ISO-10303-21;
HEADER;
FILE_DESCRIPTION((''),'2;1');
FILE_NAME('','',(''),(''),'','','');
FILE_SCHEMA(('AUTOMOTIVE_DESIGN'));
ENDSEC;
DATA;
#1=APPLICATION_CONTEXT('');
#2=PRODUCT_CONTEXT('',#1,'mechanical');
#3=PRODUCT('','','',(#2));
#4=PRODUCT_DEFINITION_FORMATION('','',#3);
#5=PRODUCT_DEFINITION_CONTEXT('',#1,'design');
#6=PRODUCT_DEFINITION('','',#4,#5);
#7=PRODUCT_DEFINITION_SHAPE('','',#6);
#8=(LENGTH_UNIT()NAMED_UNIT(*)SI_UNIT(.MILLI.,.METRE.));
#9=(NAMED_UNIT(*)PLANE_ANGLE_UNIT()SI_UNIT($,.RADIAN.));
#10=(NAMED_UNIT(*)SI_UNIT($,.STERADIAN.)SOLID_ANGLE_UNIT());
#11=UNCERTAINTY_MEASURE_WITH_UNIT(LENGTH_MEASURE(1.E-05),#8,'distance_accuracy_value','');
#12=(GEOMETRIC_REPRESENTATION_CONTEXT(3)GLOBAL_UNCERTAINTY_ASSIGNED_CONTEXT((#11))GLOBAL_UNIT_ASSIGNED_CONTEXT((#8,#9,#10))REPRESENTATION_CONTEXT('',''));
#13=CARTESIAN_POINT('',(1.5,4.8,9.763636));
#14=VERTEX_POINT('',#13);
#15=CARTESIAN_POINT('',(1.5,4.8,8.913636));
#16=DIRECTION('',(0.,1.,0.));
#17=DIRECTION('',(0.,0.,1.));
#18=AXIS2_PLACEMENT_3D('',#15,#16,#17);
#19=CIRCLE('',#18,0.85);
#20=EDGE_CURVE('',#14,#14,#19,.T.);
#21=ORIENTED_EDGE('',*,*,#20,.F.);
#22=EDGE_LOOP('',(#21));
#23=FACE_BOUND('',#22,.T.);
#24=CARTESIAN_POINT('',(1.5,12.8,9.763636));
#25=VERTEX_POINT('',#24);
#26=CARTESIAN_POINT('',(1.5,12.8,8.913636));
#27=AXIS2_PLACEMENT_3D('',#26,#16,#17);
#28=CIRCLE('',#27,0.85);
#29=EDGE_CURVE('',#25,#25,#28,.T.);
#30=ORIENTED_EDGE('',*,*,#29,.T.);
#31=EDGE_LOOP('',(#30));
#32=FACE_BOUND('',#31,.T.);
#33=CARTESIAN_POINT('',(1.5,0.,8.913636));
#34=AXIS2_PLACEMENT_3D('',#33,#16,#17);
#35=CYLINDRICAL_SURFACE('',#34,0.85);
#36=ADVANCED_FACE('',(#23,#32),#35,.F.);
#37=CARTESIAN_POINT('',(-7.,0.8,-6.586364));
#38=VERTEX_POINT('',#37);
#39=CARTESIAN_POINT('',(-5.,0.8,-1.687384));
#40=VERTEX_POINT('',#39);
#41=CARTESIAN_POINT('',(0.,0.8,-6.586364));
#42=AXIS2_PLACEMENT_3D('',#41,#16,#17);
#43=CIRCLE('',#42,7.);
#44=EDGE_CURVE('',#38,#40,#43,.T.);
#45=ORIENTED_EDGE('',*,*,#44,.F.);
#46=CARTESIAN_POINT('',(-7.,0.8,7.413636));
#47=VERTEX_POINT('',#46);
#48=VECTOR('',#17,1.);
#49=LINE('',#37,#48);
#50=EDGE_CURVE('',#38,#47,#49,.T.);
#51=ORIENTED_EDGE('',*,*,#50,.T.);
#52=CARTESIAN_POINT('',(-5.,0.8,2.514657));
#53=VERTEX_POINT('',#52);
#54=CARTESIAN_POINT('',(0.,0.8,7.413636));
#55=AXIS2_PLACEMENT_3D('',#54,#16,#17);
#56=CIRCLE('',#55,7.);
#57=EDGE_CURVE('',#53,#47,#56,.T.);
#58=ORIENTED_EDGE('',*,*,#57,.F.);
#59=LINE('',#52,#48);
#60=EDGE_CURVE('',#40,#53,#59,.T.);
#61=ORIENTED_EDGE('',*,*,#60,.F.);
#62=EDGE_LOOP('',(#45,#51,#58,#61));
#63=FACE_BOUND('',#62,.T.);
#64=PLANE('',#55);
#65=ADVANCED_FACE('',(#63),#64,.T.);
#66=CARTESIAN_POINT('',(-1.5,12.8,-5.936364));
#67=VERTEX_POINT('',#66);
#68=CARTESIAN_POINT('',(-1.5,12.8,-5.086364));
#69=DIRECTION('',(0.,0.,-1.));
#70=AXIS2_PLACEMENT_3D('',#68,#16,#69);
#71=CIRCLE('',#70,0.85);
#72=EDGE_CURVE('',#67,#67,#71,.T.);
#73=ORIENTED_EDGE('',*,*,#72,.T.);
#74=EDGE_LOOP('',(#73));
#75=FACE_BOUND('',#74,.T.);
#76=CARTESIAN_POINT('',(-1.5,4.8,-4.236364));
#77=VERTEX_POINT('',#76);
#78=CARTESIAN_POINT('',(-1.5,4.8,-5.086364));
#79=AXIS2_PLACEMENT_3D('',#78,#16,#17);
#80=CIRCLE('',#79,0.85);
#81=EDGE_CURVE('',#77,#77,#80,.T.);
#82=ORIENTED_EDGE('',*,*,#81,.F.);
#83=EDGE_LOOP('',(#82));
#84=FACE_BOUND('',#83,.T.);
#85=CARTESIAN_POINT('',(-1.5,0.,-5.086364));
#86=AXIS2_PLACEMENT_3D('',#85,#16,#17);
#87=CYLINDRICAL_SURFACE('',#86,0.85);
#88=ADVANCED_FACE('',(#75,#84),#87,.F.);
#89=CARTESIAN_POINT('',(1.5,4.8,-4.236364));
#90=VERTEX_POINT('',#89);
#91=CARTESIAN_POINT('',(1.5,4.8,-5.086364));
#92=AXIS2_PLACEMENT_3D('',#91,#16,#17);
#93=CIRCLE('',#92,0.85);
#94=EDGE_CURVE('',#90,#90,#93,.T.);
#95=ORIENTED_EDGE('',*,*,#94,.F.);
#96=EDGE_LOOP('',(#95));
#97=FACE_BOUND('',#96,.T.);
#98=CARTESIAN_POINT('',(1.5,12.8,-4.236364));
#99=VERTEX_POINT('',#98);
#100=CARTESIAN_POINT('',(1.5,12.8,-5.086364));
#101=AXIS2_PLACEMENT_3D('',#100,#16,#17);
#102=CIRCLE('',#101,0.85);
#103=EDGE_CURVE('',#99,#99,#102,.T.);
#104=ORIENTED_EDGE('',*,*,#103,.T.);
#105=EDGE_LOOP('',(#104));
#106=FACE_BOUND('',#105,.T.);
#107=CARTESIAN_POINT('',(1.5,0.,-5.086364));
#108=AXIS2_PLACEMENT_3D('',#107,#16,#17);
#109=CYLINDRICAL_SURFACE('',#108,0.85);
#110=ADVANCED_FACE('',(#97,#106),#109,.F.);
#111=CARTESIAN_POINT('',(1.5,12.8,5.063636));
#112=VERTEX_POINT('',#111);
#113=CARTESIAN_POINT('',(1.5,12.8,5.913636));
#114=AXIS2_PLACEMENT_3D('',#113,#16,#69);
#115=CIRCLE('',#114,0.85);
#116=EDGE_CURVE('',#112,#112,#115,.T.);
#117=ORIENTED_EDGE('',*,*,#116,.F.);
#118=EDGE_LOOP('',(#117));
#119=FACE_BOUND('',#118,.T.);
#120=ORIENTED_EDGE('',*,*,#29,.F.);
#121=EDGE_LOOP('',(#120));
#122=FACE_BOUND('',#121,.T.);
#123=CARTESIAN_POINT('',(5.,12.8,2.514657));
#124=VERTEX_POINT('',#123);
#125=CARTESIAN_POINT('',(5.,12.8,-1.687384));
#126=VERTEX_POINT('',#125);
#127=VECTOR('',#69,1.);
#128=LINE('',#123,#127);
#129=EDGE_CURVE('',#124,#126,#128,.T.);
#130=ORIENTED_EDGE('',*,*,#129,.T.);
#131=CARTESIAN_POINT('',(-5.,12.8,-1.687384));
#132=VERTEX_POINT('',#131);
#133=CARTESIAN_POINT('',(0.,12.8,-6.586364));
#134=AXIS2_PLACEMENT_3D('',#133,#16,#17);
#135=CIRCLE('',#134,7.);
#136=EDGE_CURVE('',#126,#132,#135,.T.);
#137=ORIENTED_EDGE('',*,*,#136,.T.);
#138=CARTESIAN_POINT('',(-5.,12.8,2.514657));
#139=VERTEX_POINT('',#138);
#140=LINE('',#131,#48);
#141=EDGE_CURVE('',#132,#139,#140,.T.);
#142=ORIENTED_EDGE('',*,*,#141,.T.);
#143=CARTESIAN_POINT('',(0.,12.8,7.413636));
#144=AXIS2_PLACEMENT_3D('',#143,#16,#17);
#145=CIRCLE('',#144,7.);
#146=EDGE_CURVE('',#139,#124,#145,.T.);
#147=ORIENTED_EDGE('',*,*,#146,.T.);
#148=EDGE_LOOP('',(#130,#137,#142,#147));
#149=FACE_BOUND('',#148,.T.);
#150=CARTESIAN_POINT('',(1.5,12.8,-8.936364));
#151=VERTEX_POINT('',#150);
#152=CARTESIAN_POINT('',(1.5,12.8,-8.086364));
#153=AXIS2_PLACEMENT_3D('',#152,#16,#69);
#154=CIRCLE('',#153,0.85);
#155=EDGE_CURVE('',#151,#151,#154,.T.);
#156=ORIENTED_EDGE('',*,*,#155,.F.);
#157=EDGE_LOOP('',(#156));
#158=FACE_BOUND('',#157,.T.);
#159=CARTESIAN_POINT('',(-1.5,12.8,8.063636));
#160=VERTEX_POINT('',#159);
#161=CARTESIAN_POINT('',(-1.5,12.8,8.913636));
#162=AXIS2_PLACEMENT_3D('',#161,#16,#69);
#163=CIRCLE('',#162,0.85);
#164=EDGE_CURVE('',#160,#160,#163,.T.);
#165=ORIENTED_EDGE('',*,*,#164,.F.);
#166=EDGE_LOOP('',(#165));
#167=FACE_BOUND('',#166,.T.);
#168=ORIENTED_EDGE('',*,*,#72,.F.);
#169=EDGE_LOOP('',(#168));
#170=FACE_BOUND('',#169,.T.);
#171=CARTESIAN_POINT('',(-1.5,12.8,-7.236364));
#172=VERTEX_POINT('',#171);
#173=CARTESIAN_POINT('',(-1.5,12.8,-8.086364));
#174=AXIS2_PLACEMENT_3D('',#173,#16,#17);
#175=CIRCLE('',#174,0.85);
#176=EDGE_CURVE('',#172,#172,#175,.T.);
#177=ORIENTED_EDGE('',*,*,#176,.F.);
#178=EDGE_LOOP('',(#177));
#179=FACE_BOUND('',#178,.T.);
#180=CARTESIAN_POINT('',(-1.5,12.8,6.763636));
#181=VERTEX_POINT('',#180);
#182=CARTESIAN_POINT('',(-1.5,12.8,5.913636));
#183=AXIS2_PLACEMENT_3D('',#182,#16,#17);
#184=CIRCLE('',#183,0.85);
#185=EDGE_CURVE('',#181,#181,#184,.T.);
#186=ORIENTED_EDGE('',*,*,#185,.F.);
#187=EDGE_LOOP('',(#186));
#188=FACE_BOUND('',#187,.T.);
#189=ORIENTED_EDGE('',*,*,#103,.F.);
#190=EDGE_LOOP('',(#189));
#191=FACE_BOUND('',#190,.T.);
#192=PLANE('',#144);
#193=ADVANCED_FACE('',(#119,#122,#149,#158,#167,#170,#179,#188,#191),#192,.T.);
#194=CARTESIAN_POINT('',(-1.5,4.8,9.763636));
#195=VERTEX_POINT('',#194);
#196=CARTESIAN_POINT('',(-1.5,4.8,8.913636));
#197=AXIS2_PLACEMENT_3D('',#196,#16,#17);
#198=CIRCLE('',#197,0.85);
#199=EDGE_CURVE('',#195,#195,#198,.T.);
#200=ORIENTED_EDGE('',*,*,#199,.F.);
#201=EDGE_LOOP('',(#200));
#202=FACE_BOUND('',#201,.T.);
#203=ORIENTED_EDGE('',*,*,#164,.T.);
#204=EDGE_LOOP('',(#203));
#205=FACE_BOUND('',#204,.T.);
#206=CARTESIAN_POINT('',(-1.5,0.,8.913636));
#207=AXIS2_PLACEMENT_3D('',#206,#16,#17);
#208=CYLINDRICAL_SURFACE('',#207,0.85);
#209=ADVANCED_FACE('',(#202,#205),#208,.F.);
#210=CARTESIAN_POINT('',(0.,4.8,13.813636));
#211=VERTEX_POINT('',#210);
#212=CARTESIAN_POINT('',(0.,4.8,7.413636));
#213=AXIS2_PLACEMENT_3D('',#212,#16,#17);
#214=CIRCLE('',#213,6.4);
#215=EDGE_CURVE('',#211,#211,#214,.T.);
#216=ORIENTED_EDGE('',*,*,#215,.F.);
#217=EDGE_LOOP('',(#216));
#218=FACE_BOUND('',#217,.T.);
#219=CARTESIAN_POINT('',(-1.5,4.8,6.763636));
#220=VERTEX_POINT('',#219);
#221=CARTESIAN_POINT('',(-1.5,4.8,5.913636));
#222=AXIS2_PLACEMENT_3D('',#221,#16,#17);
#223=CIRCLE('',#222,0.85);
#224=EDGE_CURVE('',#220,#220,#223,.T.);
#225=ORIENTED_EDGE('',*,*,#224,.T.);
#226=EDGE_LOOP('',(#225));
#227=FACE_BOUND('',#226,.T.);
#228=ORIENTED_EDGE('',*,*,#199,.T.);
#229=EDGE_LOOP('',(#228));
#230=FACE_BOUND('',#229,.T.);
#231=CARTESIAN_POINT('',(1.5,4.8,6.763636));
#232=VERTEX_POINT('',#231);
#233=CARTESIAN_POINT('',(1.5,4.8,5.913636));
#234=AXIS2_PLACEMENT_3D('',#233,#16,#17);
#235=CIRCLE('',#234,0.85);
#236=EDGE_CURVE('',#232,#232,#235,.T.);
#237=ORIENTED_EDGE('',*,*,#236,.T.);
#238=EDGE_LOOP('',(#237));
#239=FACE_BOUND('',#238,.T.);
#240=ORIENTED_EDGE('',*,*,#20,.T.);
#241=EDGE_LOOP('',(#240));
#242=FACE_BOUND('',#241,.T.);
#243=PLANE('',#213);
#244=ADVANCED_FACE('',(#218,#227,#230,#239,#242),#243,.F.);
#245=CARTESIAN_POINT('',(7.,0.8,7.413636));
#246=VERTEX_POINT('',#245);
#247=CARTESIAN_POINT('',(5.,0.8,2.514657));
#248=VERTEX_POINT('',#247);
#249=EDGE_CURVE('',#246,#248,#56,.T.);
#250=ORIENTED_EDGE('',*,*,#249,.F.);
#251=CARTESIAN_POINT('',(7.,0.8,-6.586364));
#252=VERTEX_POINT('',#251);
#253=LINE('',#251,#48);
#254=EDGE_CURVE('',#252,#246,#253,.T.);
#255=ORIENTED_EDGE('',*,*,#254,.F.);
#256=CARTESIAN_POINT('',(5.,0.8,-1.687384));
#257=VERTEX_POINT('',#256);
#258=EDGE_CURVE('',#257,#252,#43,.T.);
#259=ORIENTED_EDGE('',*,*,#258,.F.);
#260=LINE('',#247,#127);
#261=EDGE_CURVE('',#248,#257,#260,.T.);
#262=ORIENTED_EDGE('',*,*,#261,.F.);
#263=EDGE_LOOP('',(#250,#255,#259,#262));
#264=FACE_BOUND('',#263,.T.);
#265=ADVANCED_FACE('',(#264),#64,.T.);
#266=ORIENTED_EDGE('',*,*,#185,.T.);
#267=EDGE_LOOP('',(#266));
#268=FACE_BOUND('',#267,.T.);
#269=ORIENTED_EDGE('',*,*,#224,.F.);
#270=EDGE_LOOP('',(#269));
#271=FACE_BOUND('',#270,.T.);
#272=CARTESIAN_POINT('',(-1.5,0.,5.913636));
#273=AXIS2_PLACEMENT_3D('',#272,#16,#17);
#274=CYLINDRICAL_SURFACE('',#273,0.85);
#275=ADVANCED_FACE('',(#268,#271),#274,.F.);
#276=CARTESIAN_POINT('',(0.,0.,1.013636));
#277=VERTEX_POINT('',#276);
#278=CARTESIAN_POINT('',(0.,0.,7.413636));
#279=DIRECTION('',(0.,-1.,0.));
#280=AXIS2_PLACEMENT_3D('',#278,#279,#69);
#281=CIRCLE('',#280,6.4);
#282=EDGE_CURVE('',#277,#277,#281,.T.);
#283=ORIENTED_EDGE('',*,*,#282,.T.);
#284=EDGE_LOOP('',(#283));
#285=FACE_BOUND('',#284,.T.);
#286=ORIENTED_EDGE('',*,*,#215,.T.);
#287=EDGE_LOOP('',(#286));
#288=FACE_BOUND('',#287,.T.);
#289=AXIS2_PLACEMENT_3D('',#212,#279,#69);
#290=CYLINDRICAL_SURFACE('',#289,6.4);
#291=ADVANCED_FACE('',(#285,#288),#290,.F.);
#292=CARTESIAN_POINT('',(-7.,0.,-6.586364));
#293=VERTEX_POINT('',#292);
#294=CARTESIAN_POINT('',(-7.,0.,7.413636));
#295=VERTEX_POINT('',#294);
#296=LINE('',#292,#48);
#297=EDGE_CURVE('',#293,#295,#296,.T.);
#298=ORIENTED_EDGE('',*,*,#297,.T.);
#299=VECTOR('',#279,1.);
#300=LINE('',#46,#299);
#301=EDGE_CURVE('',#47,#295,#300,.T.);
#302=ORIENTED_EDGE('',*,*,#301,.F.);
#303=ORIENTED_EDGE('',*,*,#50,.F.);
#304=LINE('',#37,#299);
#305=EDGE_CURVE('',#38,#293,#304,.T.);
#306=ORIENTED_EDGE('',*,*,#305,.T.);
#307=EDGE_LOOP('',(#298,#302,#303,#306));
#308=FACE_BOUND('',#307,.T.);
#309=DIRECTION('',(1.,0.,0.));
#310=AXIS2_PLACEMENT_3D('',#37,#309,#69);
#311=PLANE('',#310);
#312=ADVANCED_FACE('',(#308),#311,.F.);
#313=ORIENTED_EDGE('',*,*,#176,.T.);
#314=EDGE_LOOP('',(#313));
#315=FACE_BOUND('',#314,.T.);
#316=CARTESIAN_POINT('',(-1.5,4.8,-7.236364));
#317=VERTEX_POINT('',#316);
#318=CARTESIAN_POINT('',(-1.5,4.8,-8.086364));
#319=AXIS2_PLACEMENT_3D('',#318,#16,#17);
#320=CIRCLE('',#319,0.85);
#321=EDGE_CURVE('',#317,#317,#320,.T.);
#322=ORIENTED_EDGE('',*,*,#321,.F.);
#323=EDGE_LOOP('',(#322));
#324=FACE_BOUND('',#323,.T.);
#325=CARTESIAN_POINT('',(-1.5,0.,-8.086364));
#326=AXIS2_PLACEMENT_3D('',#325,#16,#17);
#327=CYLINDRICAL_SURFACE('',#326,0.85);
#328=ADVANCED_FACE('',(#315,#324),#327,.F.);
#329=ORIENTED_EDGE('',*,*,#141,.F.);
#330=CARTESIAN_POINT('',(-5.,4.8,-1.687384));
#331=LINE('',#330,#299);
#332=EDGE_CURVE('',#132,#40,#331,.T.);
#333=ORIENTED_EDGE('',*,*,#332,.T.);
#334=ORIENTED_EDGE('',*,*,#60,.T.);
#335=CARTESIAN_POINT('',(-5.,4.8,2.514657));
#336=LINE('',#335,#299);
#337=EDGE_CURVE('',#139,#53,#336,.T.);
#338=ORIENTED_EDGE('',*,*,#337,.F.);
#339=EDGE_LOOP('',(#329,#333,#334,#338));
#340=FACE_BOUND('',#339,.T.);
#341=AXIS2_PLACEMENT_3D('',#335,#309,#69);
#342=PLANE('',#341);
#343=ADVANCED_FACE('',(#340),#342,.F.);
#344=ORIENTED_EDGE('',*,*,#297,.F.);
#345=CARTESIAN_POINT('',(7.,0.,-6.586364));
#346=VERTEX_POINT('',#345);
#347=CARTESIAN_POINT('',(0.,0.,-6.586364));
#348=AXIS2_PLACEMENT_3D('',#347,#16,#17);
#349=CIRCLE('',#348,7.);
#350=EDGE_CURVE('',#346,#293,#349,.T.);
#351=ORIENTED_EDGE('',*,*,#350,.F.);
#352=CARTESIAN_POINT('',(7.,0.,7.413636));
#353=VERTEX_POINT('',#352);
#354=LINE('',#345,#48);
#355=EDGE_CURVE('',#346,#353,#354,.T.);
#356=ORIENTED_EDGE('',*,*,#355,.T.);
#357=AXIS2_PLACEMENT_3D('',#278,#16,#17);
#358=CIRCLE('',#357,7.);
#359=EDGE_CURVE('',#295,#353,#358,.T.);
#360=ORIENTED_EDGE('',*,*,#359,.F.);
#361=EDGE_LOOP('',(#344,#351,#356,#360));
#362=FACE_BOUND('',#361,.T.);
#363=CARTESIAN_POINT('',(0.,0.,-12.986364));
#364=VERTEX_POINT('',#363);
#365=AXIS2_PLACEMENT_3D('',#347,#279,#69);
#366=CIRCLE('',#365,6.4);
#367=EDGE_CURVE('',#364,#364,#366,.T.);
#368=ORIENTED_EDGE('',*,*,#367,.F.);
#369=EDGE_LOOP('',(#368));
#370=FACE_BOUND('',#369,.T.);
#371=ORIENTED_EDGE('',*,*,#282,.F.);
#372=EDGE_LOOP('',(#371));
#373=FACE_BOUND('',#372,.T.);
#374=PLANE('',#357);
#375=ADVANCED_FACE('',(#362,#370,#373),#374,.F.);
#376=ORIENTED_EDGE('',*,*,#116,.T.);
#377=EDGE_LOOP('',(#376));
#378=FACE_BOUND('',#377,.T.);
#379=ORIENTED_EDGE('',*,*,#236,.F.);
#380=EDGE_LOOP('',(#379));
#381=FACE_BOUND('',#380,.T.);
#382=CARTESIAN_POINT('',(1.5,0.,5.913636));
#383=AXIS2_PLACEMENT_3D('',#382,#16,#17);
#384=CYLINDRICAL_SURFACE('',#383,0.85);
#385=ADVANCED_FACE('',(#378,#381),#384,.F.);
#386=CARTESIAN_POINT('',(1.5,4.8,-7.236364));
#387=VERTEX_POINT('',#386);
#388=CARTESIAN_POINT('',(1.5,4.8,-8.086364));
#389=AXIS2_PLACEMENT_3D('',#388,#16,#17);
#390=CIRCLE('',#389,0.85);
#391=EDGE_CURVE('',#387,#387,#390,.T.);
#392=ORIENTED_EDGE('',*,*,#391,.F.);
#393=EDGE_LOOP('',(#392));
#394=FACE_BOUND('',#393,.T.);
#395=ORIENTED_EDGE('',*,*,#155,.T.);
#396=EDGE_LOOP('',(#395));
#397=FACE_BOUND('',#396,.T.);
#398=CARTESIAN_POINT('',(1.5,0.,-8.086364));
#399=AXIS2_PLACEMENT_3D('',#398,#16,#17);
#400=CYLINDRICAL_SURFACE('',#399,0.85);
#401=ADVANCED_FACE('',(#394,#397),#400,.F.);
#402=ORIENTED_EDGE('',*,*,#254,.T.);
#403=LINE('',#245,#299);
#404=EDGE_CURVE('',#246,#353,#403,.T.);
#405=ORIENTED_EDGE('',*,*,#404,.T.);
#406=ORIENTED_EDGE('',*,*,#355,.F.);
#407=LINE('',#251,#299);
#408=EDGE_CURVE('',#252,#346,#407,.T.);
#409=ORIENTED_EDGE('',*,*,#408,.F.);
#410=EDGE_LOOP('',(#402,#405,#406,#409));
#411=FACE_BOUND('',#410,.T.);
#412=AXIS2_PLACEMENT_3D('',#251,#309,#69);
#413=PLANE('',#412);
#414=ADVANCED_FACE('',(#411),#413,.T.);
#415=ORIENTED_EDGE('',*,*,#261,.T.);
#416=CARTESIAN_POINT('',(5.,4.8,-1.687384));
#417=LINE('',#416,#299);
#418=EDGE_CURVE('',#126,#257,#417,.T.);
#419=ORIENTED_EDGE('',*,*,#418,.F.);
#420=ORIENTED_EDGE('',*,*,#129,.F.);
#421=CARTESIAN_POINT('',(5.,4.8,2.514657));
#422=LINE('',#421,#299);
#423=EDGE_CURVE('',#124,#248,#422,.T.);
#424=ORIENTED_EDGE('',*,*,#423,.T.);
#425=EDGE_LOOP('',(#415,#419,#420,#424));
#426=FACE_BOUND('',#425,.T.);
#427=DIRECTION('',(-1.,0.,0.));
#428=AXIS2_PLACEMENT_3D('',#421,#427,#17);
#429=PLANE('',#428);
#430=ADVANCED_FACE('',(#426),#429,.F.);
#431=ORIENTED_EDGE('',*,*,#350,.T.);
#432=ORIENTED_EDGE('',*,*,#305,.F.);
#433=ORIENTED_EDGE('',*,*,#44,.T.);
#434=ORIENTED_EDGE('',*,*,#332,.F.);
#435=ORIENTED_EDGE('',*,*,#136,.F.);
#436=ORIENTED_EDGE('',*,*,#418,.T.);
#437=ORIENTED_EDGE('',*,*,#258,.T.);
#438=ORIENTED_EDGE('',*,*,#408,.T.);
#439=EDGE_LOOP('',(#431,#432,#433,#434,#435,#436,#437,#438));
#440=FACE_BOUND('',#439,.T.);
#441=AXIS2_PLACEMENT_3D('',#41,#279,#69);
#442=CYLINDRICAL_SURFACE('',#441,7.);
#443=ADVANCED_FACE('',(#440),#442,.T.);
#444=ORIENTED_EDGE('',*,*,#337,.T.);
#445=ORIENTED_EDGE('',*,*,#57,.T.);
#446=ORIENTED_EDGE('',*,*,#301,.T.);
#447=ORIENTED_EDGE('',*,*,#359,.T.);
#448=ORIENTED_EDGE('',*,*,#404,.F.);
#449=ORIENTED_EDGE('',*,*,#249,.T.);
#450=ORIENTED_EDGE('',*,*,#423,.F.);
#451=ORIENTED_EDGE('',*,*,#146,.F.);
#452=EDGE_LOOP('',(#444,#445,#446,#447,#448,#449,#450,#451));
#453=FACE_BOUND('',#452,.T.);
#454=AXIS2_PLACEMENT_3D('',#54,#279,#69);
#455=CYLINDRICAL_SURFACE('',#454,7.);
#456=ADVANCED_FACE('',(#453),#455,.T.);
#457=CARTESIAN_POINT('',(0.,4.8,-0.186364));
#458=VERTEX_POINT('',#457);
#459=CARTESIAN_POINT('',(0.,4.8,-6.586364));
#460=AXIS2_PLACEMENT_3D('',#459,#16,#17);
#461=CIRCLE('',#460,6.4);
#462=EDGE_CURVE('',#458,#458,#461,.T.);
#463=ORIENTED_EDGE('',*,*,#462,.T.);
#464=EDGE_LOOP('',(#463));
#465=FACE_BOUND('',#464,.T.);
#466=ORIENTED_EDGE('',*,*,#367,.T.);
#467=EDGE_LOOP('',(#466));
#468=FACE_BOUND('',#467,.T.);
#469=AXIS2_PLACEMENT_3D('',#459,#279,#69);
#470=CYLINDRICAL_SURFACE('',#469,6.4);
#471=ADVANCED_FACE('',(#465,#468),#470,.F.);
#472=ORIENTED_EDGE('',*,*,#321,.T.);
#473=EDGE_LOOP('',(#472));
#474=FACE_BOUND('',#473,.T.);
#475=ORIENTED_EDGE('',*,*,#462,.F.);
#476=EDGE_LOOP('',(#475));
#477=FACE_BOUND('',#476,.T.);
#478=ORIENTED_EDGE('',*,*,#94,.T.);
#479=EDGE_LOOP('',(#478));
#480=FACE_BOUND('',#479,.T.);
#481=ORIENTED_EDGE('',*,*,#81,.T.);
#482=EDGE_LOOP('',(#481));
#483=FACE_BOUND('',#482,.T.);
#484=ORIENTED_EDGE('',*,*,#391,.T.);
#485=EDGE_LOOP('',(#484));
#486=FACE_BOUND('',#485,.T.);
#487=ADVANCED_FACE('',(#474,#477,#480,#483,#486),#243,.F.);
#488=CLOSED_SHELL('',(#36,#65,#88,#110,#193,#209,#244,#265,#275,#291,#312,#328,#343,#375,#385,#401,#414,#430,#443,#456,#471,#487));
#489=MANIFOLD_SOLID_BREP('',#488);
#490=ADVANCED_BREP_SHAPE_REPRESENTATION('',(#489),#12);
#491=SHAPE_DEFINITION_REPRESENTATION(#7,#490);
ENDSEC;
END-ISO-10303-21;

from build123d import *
from build123d.topology import SkipClean

# Parameters (mm, degrees)
EXTRUDE_1_DEPTH     = 0.8
SKETCH_2_R          = 6.4
EXTRUDE_2_DEPTH     = 4
EXTRUDE_3_DEPTH     = 8
CUT_EXTRUDE_1_REACH = 22.508
SKETCH_4_R          = 6.4
SKETCH_5_R          = 0.85
CUT_EXTRUDE_2_DEPTH = 21.508362032


# Read off the part's stored shape, not the designer's step: 填料-伸長3
with BuildPart() as part:
    # 草圖1 → 填料-伸長1 (new body)
    with BuildSketch(Plane(origin=(0, 0, 0), x_dir=(1, 0, 0), z_dir=(0, 1, 0))):
        with BuildLine():
            Line((7, 6.586363636), (7, -7.413636364))
            ThreePointArc((7, -7.413636364), (0, -14.413636364), (-7, -7.413636364))
            Line((-7, -7.413636364), (-7, 6.586363636))
            ThreePointArc((-7, 6.586363636), (0, 13.586363636), (7, 6.586363636))
        make_face()
    extrude(amount=EXTRUDE_1_DEPTH)

    # 草圖2 → 填料-伸長2 (add)
    with SkipClean():  # the faces are left unmerged after this step: merging them gives an invalid solid
        with BuildSketch(Plane(origin=(0, 0.8, 0), x_dir=(1, 0, 0), z_dir=(0, 1, 0))):
            with BuildLine():
                Line((5, -2.514656878), (5, 1.687384151))
                ThreePointArc((5, 1.687384151), (0, 13.586363636), (-5, 1.687384151))
                Line((-5, 1.687384151), (-5, -2.514656878))
                ThreePointArc((-5, -2.514656878), (0, -14.413636364), (5, -2.514656878))
            make_face()
            with Locations(Location((0, 6.586363636, 0), (0, 0, 270))):
                Circle(SKETCH_2_R, mode=Mode.SUBTRACT)
            with Locations(Location((0, -7.413636364, 0), (0, 0, 270))):
                Circle(SKETCH_2_R, mode=Mode.SUBTRACT)
        extrude(amount=EXTRUDE_2_DEPTH)

    # 填料-伸長3 outline → 填料-伸長3 (add)
    with SkipClean():  # the faces are left unmerged after this step: merging them gives an invalid solid
        with BuildSketch(Plane(origin=(0, 4.8, 0), x_dir=(1, 0, 0), z_dir=(0, 1, 0))):
            with BuildLine():
                ThreePointArc((5, 1.687384151), (0, 13.586363636), (-5, 1.687384151))
                Line((-5, 1.687384151), (-5, -2.514656878))
                ThreePointArc((-5, -2.514656878), (0, -14.413636364), (5, -2.514656878))
                Line((5, -2.514656878), (5, 1.687384151))
            make_face()
        extrude(amount=EXTRUDE_3_DEPTH)

    # 草圖4 → 除料-伸長1 (cut, up to next)
    with BuildSketch(Plane.XZ, mode=Mode.PRIVATE) as cut_extrude_1_sk1:
        with Locations(Location((0, 7.413636364, 0), (0, 0, 270))):
            Circle(SKETCH_4_R)
    cut_extrude_1_tool1 = extrude(cut_extrude_1_sk1.sketch, amount=-CUT_EXTRUDE_1_REACH, mode=Mode.PRIVATE) & part.part
    # 草圖4 → 除料-伸長1 (cut, up to next)
    with BuildSketch(Plane.XZ, mode=Mode.PRIVATE) as cut_extrude_1_sk2:
        with Locations(Location((0, -6.586363636, 0), (0, 0, 270))):
            Circle(SKETCH_4_R)
    cut_extrude_1_tool2 = extrude(cut_extrude_1_sk2.sketch, amount=-CUT_EXTRUDE_1_REACH, mode=Mode.PRIVATE) & part.part
    add(cut_extrude_1_tool1.solids().sort_by_distance((0, 0, 7.413636))[0], mode=Mode.SUBTRACT)
    add(cut_extrude_1_tool2.solids().sort_by_distance((0, 0, -6.586364))[0], mode=Mode.SUBTRACT)

    # 草圖5 → 除料-伸長2 (cut, through all)
    with SkipClean():  # the faces are left unmerged after this step: merging them gives an invalid solid
        with BuildSketch(Plane(origin=(0, 12.8, 0), x_dir=(1, 0, 0), z_dir=(0, 1, 0))):
            with Locations(Location((-1.5, 8.086363636, 0), (0, 0, 270))):
                Circle(SKETCH_5_R)
            with Locations(Location((1.5, 8.086363636, 0), (0, 0, 270))):
                Circle(SKETCH_5_R)
            with Locations(Location((1.5, 5.086363636, 0), (0, 0, 270))):
                Circle(SKETCH_5_R)
            with Locations(Location((-1.5, 5.086363636, 0), (0, 0, 270))):
                Circle(SKETCH_5_R)
            with Locations(Location((1.5, -5.913636364, 0), (0, 0, 270))):
                Circle(SKETCH_5_R)
            with Locations(Location((1.5, -8.913636364, 0), (0, 0, 270))):
                Circle(SKETCH_5_R)
            with Locations(Location((-1.5, -5.913636364, 0), (0, 0, 270))):
                Circle(SKETCH_5_R)
            with Locations(Location((-1.5, -8.913636364, 0), (0, 0, 270))):
                Circle(SKETCH_5_R)
        extrude(amount=-CUT_EXTRUDE_2_DEPTH, mode=Mode.SUBTRACT)


solid = part.part
